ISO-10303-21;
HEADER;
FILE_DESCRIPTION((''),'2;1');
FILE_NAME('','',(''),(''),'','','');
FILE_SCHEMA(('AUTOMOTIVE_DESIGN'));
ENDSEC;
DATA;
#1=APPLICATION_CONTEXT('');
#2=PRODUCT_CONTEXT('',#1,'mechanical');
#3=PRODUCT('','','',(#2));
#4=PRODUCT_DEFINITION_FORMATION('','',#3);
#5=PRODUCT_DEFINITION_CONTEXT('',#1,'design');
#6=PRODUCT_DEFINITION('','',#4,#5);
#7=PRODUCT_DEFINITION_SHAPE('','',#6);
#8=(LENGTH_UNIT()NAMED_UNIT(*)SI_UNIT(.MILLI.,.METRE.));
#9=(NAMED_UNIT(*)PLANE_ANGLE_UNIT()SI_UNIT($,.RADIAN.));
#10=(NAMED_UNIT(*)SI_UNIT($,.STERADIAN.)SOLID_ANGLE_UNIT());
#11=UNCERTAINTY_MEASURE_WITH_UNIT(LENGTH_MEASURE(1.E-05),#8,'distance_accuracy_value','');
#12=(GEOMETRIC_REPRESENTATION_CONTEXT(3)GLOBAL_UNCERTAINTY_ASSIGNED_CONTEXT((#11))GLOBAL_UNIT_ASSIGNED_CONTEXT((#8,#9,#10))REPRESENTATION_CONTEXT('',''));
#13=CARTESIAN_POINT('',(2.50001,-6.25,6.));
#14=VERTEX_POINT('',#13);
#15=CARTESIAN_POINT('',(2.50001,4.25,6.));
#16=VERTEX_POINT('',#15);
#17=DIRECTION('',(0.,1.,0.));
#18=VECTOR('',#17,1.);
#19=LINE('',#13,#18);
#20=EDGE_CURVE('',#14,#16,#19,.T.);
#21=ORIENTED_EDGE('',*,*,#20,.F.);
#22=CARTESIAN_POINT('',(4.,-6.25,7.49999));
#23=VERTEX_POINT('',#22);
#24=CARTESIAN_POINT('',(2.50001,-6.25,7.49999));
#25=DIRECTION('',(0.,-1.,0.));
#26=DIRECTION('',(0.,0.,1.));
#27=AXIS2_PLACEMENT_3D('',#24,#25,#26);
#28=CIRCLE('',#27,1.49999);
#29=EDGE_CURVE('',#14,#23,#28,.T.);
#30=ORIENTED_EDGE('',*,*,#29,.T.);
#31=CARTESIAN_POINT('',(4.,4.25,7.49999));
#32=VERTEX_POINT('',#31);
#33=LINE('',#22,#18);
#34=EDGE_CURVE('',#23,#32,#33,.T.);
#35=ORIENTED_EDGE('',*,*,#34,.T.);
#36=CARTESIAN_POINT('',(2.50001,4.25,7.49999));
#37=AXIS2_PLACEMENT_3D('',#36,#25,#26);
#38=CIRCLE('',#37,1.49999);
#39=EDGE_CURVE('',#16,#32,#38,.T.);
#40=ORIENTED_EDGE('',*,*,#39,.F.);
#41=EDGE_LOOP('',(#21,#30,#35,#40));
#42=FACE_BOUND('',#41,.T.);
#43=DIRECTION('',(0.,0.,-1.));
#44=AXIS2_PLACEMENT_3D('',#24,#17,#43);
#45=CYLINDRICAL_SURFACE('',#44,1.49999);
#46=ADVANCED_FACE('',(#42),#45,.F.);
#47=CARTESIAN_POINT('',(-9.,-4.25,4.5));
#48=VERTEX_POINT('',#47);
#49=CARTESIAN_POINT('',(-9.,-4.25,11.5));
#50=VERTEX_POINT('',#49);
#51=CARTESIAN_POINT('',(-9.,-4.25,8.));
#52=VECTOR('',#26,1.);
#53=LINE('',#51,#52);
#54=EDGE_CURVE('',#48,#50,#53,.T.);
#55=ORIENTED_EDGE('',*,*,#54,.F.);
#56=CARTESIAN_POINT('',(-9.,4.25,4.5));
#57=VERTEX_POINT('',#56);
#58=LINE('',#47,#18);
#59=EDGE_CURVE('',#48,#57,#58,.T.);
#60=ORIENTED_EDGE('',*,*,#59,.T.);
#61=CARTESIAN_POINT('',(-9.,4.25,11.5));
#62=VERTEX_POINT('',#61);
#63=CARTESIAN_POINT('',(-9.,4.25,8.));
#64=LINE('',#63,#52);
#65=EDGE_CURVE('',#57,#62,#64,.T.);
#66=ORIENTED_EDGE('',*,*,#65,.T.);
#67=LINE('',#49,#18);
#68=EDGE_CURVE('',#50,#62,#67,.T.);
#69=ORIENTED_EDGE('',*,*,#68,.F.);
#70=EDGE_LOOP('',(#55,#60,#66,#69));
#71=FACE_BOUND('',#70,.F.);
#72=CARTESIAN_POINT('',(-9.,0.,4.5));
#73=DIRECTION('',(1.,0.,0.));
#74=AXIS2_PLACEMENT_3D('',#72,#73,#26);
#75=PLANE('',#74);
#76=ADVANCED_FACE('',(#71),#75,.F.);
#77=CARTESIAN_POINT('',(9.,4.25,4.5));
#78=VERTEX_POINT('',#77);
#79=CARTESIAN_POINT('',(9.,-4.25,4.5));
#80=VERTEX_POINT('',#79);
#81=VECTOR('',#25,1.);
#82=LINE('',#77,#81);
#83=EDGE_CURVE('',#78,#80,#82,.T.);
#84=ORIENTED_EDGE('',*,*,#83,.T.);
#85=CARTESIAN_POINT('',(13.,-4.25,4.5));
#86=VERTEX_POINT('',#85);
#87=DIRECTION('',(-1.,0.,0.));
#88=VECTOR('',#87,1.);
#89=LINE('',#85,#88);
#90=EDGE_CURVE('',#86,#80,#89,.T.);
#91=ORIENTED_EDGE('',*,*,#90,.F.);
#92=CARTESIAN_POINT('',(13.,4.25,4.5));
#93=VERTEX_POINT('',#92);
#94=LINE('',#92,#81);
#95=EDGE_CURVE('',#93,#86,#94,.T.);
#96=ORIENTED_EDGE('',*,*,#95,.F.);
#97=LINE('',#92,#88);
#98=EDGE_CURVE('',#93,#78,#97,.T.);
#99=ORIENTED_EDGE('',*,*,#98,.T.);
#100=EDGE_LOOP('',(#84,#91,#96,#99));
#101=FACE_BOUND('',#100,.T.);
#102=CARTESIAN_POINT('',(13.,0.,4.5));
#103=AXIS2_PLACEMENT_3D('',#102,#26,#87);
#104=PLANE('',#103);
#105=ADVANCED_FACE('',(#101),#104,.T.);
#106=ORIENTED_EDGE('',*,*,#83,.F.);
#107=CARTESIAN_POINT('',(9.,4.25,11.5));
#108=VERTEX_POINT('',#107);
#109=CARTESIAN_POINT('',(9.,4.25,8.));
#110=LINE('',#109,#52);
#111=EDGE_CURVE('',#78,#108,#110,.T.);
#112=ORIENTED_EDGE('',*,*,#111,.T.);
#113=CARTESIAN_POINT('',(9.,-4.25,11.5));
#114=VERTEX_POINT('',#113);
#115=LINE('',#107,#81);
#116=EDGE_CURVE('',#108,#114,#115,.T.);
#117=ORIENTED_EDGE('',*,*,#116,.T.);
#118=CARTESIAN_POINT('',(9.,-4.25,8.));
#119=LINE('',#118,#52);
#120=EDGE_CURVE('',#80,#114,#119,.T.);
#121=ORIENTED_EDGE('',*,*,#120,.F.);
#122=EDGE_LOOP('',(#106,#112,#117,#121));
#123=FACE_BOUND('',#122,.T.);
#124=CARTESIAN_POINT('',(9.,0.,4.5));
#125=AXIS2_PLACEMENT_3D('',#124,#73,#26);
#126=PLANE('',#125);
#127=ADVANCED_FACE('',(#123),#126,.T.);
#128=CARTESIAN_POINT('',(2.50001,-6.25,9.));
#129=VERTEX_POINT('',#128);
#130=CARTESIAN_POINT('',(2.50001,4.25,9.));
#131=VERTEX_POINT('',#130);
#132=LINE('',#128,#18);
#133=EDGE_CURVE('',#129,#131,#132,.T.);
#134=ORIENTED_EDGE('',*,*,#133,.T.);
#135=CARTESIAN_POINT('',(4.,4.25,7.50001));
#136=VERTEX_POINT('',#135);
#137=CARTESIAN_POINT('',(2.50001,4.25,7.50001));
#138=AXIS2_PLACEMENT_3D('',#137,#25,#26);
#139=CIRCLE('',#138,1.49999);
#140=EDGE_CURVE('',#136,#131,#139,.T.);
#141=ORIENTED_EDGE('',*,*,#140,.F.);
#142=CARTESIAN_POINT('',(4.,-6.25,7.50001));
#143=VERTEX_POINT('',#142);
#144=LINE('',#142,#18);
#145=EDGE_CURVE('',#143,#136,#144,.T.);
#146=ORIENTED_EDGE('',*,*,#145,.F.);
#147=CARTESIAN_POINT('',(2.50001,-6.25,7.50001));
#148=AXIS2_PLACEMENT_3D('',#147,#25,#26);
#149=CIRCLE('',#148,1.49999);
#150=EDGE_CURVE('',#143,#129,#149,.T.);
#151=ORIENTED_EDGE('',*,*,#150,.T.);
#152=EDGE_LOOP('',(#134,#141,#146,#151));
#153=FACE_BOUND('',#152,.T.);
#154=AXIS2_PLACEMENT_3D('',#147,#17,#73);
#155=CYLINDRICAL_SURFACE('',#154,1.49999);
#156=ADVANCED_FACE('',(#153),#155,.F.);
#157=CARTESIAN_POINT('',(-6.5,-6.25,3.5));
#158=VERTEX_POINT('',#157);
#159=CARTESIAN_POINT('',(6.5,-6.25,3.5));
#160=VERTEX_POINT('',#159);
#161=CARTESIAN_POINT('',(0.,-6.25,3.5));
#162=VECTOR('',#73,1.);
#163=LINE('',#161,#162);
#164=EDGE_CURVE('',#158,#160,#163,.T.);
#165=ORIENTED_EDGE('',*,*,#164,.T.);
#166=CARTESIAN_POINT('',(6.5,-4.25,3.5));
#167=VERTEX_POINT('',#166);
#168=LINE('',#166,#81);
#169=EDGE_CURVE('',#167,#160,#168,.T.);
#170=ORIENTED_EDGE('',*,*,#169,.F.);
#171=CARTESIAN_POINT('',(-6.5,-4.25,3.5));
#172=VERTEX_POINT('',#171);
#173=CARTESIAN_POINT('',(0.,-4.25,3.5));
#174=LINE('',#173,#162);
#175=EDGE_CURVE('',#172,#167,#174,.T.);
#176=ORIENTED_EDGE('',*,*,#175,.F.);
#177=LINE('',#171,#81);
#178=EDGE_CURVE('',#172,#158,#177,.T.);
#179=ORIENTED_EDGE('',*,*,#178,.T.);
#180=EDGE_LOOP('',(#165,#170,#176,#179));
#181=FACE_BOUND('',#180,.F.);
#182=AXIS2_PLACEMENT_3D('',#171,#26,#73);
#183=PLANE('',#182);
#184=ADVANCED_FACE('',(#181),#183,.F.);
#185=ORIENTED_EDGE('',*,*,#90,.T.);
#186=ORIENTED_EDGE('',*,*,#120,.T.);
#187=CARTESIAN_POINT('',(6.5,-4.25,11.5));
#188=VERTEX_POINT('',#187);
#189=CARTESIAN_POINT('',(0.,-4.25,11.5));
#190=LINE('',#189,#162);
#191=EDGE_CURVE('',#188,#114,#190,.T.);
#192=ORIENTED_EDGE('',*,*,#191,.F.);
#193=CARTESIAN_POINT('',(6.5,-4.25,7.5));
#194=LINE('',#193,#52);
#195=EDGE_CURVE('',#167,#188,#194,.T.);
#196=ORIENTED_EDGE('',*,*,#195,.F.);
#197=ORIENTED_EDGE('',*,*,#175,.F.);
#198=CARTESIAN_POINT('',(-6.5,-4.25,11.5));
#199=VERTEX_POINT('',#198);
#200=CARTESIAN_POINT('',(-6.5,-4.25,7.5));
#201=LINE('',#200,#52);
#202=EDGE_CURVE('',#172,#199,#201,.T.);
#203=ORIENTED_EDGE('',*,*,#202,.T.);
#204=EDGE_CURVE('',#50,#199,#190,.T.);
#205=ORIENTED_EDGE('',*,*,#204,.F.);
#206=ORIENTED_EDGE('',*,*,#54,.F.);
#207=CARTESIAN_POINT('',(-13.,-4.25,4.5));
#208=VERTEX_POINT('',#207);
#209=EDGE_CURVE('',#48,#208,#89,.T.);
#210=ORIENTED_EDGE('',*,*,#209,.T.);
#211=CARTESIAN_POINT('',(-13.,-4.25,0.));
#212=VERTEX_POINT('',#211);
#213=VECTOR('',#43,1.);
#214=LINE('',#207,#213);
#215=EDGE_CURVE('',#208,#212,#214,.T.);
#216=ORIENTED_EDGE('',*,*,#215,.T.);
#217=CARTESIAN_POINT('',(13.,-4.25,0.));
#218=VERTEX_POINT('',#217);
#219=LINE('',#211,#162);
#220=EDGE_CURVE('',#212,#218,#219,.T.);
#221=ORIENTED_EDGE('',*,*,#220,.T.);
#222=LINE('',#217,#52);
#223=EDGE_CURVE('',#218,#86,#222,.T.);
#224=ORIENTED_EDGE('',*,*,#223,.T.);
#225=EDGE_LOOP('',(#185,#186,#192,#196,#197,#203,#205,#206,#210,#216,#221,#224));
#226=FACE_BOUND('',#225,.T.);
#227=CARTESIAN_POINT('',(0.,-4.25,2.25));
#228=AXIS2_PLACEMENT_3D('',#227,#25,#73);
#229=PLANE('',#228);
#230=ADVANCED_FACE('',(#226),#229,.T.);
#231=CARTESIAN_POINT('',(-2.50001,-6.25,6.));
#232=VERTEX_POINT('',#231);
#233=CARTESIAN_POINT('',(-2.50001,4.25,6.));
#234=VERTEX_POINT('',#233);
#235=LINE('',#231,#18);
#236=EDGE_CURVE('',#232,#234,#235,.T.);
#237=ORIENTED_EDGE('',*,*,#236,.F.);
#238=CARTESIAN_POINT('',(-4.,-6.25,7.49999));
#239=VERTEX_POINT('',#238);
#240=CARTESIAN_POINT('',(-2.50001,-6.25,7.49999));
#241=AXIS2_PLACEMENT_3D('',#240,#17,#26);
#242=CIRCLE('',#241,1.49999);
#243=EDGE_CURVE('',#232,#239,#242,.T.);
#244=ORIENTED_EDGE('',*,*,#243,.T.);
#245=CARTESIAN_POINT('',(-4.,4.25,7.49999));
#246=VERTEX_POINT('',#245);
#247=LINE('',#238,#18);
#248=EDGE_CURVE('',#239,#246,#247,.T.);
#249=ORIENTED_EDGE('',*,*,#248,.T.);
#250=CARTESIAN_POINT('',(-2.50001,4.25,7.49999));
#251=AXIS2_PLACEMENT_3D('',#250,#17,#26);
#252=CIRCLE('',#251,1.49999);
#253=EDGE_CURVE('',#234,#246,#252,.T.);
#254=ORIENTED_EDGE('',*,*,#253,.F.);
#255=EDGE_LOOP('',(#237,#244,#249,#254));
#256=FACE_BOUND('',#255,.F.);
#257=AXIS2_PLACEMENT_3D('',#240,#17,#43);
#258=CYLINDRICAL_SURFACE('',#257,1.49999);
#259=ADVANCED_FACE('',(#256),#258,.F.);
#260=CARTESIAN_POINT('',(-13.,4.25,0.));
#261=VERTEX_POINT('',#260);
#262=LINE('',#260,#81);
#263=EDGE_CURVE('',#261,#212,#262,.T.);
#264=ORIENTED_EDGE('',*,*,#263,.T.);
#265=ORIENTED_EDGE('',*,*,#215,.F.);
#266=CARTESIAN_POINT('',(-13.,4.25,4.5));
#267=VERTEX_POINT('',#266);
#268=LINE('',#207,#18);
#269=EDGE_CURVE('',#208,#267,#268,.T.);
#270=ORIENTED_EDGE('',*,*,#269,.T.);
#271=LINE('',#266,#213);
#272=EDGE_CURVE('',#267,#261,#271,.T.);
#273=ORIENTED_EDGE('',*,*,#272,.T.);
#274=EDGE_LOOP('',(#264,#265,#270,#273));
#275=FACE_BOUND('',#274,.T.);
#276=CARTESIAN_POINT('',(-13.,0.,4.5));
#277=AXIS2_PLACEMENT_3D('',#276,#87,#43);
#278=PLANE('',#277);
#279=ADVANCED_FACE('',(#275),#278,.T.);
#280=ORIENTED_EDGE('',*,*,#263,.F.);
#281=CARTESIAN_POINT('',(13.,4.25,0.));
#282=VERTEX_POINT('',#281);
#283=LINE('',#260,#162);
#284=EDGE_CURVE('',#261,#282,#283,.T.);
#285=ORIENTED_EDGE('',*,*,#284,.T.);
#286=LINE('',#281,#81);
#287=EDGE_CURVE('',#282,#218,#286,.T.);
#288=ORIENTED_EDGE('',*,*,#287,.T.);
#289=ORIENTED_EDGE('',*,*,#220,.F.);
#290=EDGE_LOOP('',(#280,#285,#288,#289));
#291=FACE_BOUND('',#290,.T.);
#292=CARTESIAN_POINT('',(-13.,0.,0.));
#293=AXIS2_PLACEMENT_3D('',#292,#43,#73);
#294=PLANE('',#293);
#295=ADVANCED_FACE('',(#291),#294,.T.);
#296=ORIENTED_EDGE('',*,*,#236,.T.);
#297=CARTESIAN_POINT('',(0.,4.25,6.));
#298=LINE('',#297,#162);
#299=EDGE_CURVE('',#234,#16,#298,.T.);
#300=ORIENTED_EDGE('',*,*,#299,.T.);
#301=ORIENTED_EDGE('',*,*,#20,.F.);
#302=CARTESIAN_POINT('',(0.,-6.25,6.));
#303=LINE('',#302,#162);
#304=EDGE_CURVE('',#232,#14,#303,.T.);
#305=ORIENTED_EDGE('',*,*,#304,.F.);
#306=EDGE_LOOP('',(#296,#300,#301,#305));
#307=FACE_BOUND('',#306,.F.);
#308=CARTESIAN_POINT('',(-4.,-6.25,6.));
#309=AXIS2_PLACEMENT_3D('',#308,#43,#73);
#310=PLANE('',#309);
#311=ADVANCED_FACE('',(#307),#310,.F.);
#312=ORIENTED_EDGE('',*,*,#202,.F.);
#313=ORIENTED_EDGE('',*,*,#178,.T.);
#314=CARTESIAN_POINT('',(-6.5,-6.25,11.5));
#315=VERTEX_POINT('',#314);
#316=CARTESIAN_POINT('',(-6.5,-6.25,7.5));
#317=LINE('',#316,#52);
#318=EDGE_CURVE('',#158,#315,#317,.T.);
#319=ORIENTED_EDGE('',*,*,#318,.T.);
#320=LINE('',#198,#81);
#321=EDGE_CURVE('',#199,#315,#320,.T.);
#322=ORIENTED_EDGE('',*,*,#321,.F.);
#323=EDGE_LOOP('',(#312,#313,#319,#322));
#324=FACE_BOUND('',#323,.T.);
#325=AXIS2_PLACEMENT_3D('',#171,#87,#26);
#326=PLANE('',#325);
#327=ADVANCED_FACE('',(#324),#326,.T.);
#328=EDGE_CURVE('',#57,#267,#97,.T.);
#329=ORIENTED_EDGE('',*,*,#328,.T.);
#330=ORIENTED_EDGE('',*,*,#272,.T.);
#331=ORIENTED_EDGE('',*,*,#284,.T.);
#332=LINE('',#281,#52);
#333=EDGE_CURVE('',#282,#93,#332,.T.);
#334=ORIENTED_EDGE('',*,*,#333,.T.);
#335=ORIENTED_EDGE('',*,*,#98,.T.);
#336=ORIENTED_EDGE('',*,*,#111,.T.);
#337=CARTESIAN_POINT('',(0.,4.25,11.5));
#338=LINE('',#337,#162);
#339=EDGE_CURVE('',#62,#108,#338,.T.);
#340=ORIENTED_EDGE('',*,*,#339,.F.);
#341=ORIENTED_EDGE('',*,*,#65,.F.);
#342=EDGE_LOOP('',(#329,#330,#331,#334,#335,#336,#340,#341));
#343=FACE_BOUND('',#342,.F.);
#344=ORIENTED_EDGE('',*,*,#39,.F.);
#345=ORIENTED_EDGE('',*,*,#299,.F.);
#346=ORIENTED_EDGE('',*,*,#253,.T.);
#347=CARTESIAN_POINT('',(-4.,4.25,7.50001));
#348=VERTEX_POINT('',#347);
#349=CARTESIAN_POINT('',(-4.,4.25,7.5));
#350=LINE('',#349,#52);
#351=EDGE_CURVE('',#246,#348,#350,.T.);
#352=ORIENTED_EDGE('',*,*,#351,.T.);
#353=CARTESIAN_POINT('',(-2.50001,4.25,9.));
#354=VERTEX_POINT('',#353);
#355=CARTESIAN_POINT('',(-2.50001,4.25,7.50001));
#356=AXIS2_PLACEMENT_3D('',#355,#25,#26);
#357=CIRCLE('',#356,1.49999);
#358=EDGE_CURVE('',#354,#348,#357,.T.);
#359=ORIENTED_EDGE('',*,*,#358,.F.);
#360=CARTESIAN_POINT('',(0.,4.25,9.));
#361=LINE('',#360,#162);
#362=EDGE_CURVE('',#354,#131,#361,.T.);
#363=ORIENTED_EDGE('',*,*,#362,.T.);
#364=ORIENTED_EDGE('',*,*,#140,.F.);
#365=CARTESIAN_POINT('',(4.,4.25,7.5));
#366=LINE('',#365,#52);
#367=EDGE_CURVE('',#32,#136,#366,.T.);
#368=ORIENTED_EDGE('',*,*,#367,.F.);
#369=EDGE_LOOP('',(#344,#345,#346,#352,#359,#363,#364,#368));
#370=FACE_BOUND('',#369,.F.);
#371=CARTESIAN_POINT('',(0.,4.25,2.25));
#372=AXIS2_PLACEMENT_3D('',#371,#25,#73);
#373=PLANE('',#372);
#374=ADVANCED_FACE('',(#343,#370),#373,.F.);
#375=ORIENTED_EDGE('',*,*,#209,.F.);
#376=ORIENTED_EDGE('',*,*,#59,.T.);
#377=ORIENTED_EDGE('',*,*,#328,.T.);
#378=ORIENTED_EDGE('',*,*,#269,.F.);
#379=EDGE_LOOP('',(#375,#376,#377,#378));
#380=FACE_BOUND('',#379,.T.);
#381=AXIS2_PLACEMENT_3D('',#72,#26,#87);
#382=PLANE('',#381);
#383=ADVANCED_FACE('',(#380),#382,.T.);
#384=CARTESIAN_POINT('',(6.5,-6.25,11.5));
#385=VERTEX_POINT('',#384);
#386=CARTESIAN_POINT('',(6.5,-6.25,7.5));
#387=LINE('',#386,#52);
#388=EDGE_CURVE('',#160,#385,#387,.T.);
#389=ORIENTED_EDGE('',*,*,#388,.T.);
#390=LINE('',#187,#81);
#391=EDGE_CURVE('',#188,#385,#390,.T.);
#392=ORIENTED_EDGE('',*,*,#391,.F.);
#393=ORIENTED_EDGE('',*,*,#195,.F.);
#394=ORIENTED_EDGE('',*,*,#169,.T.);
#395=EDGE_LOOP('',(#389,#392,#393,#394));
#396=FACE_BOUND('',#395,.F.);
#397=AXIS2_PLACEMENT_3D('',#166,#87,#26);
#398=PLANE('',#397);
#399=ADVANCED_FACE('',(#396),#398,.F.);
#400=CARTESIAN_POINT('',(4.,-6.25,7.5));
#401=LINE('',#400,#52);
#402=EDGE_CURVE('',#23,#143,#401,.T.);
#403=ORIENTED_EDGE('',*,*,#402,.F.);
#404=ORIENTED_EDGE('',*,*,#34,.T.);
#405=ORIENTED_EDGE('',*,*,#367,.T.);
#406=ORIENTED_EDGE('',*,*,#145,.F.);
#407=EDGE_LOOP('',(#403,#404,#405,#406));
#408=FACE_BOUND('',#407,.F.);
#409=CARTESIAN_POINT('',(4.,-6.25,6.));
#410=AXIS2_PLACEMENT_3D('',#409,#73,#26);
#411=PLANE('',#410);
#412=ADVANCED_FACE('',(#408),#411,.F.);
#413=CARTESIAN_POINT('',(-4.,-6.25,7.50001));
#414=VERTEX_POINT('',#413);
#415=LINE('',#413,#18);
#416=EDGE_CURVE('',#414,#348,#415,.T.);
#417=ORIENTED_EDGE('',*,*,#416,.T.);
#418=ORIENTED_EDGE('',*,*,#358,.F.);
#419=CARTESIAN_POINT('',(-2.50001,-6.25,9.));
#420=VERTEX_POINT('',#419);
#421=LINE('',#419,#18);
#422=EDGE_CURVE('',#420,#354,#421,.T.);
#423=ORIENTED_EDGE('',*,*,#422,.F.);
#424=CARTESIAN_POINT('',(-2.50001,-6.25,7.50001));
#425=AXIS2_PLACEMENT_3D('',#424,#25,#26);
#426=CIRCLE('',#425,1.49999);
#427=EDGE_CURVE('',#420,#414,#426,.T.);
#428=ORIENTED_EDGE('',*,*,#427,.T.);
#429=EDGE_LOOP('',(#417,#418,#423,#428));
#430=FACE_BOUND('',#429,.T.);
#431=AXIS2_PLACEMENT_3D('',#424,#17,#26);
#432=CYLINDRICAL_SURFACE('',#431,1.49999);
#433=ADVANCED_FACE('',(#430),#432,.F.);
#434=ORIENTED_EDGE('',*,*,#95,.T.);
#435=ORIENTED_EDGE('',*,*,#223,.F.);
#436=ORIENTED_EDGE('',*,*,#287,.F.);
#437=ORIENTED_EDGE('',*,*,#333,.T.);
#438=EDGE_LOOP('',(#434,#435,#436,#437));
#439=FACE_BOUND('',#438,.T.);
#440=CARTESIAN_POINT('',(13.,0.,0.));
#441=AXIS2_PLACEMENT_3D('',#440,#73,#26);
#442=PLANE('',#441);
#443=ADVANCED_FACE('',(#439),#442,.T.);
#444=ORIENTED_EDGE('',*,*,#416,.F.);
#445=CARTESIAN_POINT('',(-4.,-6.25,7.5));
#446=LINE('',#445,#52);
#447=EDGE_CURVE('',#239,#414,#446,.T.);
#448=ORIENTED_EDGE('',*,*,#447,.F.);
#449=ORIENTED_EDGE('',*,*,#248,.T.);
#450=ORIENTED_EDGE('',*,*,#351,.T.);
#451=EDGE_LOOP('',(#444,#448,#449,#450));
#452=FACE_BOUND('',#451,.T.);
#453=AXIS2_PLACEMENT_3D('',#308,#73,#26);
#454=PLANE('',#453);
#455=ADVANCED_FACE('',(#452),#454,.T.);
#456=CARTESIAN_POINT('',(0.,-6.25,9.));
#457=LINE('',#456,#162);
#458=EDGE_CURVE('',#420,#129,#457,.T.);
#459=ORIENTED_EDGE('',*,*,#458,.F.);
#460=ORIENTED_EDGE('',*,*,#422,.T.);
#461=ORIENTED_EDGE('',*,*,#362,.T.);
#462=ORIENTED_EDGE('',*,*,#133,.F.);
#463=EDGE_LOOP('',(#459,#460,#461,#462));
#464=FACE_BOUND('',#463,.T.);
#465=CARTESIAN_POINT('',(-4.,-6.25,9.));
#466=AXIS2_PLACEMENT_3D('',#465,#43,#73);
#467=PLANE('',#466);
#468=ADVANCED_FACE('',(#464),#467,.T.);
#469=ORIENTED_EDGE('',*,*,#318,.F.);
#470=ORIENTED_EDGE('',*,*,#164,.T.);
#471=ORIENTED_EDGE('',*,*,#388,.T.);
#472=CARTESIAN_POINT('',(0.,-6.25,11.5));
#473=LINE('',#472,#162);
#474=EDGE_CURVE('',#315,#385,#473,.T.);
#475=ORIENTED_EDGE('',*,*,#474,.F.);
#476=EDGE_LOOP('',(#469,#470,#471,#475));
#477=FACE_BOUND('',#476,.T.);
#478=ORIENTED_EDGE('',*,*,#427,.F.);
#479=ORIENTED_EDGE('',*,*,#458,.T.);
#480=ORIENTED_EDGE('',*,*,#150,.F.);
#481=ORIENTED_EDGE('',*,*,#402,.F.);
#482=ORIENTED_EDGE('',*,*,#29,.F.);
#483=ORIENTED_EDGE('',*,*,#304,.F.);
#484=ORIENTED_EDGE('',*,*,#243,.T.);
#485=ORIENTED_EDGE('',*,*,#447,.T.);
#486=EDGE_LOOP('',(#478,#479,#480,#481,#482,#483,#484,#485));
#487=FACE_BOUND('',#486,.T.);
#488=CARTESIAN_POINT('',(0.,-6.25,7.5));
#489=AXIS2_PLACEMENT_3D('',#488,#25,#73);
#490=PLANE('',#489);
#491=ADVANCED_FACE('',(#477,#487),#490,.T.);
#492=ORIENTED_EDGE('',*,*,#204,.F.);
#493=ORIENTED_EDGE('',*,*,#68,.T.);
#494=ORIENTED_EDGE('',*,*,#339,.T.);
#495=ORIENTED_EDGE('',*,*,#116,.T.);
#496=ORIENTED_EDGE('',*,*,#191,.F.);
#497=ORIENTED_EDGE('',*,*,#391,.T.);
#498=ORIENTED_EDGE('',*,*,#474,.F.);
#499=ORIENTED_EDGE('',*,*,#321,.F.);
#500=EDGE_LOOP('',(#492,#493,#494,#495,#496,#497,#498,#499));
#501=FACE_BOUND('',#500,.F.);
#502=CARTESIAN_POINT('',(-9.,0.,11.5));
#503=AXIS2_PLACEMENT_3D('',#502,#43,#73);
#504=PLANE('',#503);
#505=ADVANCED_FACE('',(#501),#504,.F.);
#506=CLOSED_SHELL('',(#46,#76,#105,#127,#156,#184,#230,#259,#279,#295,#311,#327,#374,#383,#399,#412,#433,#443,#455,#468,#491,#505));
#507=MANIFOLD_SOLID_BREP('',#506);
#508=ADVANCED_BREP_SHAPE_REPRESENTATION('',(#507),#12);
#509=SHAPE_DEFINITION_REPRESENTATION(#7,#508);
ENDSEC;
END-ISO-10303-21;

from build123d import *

# Parameters (mm, degrees)
F0_W     = 18
F0_H     = 7
F1_DEPTH = 4.25
F2_W     = 13
F2_H     = 8
F3_DEPTH = 2
F4_W     = 8
F4_H     = 3
F5_DEPTH = 10.5
F6_R     = 1.49999


# Not quite as in the source:
# - a fillet or chamfer is up to 0.001 mm smaller than in the source, because OpenCascade refuses the exact size


with BuildPart() as f1:
    # F0 (on Front) → F1 (new body, symmetric)
    with BuildSketch(Plane.XZ):
        Polygon((-13, 4.5), (-13, 0), (13, 0), (13, 4.5), (9, 4.5), (-9, 4.5), align=None)
        with Locations((0, 8)):
            Rectangle(F0_W, F0_H)
    extrude(amount=F1_DEPTH, both=True)

    # F2 (on face) → F3 (join)
    with BuildSketch(Plane.XZ.offset(4.25)):
        with Locations((0, 7.5)):
            Rectangle(F2_W, F2_H)
    extrude(amount=F3_DEPTH)

    # F4 (on face) → F5 (cut, through all)
    with BuildSketch(Plane.XZ.offset(6.25)):
        with Locations((0, 7.5)):
            Rectangle(F4_W, F4_H)
    extrude(amount=-F5_DEPTH, mode=Mode.SUBTRACT)

    # F6 (radius 1.5 in the source; OpenCascade refuses exactly that, so slightly less here)
    f6_edges = [f1.edges().sort_by_distance(p)[0] for p in [
        (-4, -1, 6),
        (-4, -1, 9),
        (4, -1, 6),
        (4, -1, 9),
    ]]
    fillet(f6_edges, radius=F6_R)


solid = f1.part
